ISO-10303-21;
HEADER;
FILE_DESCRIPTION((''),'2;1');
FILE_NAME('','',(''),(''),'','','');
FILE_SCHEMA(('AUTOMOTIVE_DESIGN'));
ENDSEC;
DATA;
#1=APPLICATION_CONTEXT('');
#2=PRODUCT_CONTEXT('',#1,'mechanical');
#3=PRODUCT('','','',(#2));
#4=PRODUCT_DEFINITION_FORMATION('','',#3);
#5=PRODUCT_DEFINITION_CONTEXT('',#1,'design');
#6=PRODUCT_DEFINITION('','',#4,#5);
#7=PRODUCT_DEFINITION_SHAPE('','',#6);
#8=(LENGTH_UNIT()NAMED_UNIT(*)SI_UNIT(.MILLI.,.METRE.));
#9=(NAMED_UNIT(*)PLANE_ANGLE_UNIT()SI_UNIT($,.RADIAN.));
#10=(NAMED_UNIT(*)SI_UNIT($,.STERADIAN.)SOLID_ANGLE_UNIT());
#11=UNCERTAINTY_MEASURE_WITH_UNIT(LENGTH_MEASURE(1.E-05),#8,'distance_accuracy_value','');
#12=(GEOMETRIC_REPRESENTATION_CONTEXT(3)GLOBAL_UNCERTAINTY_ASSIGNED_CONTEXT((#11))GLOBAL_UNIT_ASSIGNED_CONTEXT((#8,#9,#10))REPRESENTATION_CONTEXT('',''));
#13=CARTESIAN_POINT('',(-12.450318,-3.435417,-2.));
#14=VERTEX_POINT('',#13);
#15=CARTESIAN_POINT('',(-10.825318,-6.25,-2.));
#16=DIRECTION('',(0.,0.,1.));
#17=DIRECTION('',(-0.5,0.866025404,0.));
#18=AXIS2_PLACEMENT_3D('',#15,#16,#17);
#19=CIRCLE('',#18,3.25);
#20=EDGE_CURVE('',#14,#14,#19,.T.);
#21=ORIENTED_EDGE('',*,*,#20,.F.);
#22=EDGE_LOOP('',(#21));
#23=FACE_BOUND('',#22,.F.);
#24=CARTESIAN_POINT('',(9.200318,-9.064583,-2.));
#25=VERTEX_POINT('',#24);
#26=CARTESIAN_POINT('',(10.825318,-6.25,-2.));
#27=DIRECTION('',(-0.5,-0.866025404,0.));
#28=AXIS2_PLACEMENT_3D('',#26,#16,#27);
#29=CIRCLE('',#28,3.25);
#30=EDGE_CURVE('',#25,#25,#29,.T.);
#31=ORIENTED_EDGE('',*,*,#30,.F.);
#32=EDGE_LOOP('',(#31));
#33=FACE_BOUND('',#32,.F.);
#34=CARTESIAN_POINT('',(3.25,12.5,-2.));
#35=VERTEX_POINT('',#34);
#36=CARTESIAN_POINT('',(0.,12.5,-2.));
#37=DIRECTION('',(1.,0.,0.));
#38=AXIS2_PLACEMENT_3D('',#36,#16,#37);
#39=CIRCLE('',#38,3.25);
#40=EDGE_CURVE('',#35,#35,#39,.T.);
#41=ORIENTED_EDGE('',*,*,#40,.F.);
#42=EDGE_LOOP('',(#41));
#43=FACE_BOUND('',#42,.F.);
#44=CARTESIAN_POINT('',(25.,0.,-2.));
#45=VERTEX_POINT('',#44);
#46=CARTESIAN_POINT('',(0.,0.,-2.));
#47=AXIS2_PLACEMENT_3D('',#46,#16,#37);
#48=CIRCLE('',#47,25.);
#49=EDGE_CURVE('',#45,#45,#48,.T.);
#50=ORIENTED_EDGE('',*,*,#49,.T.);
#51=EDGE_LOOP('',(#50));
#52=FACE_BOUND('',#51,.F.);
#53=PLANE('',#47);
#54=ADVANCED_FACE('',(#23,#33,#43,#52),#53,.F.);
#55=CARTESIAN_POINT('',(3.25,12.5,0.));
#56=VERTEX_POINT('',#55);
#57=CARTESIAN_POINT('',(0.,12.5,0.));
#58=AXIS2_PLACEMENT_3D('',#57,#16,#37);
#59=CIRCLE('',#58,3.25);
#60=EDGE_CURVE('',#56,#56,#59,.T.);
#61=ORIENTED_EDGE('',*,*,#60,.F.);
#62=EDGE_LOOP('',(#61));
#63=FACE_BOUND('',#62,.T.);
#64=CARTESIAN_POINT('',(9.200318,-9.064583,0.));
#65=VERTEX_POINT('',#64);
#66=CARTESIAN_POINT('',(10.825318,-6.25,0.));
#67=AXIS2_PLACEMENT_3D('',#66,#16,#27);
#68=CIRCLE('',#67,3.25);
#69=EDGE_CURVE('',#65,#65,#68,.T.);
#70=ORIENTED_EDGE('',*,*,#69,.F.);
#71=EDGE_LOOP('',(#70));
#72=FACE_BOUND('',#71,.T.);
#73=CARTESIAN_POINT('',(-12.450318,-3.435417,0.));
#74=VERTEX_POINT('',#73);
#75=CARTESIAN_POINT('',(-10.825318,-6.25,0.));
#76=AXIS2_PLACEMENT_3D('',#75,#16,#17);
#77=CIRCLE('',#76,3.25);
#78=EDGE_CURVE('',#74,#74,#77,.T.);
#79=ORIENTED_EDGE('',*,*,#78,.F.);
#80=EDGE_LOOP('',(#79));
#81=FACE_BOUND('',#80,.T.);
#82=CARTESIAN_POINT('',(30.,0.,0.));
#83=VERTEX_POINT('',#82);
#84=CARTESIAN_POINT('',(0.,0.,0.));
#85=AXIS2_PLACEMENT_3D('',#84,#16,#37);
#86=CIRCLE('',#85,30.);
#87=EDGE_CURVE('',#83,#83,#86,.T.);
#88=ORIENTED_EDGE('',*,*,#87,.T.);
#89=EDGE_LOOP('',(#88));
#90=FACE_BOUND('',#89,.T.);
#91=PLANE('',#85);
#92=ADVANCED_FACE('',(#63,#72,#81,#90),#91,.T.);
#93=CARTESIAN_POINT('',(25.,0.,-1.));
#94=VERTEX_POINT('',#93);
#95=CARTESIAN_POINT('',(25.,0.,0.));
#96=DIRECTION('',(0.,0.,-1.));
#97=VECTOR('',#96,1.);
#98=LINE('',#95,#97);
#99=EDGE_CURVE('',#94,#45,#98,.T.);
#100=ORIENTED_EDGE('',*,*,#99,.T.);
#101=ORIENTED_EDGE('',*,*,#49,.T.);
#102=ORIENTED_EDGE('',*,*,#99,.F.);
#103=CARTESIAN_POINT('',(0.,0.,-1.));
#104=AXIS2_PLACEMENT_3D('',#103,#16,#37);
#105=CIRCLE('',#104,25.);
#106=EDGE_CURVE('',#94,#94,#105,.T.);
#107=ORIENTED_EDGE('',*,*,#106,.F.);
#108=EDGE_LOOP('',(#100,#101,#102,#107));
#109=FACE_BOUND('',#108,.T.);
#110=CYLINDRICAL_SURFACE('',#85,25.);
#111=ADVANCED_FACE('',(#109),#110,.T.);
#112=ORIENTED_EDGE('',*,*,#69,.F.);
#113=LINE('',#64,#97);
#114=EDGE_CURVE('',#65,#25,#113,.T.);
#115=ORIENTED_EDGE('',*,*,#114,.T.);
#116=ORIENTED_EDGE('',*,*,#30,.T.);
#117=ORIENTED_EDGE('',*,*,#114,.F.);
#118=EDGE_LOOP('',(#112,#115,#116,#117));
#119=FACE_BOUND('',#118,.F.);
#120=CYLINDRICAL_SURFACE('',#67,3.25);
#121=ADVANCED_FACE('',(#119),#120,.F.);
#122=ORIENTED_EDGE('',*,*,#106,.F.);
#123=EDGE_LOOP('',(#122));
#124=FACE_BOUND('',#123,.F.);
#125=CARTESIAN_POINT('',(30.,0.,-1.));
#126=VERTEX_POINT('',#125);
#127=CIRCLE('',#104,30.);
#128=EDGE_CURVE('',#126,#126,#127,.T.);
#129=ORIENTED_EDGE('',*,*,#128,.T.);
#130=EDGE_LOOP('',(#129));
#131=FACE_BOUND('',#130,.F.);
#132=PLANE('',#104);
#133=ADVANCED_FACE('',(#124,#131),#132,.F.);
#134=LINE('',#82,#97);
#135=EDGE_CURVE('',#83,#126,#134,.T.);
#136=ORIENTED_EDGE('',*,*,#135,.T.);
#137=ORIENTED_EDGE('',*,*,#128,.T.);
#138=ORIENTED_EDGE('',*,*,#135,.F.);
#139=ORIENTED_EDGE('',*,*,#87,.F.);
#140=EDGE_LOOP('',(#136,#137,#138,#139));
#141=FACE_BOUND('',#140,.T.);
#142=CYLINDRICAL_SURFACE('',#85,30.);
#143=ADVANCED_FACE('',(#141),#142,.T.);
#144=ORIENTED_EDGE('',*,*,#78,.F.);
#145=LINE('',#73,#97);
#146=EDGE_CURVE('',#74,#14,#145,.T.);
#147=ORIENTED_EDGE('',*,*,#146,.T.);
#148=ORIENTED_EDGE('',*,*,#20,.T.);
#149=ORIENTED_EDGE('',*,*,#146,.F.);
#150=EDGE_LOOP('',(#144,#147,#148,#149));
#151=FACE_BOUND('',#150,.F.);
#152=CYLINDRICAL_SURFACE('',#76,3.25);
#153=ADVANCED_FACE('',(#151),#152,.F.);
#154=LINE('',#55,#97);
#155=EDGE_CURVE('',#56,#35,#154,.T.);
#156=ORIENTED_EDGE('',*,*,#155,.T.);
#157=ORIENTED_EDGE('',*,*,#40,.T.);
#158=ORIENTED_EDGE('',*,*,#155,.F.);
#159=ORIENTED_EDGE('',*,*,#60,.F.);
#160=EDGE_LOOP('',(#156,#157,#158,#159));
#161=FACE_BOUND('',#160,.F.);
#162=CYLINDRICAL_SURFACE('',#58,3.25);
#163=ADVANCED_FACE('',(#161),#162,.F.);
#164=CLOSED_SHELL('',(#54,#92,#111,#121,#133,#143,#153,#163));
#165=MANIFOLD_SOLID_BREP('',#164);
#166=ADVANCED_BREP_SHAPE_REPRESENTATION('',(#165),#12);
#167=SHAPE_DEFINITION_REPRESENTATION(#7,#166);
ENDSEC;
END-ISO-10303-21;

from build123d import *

# Parameters (mm, degrees)
F1_R            = 25
F1_R_2          = 3.25
F2_DEPTH        = 2
F1_R_3          = 30
F3_DEPTH        = 1
F4_DEPTH        = 25
F4_COPIES_COUNT = 3


# Not quite as in the source:
# - a pattern or mirror of a feature is missing from the dataset's text; its kind, count and spacing are read off the source's solid


with BuildPart() as f2:
    # F1 (on Top) → F2 (new body)
    with BuildSketch(Plane.XY):
        Circle(F1_R)
        with Locations((0, 12.5)):
            Circle(F1_R_2, mode=Mode.SUBTRACT)
        with Locations((0, 12.5)):
            Circle(F1_R_2)
    extrude(amount=-F2_DEPTH)

    # F1 (on Top) → F3 (join)
    with BuildSketch(Plane.XY):
        Circle(F1_R_3)
        Circle(F1_R, mode=Mode.SUBTRACT)
    extrude(amount=-F3_DEPTH)

    # F1 (on Top) → F4 (cut)
    with BuildSketch(Plane.XY):
        with Locations((0, 12.5)):
            Circle(F1_R_2)
    f4 = extrude(amount=-F4_DEPTH, mode=Mode.SUBTRACT)

    # F4_copies: F4 ×3 about axis
    f4_copies_axis = Axis((0, 0, 0), (0, 0, 1))
    for i in range(1, F4_COPIES_COUNT):
        add(f4.rotate(f4_copies_axis, i * 360 / F4_COPIES_COUNT), mode=Mode.SUBTRACT)


solid = f2.part
